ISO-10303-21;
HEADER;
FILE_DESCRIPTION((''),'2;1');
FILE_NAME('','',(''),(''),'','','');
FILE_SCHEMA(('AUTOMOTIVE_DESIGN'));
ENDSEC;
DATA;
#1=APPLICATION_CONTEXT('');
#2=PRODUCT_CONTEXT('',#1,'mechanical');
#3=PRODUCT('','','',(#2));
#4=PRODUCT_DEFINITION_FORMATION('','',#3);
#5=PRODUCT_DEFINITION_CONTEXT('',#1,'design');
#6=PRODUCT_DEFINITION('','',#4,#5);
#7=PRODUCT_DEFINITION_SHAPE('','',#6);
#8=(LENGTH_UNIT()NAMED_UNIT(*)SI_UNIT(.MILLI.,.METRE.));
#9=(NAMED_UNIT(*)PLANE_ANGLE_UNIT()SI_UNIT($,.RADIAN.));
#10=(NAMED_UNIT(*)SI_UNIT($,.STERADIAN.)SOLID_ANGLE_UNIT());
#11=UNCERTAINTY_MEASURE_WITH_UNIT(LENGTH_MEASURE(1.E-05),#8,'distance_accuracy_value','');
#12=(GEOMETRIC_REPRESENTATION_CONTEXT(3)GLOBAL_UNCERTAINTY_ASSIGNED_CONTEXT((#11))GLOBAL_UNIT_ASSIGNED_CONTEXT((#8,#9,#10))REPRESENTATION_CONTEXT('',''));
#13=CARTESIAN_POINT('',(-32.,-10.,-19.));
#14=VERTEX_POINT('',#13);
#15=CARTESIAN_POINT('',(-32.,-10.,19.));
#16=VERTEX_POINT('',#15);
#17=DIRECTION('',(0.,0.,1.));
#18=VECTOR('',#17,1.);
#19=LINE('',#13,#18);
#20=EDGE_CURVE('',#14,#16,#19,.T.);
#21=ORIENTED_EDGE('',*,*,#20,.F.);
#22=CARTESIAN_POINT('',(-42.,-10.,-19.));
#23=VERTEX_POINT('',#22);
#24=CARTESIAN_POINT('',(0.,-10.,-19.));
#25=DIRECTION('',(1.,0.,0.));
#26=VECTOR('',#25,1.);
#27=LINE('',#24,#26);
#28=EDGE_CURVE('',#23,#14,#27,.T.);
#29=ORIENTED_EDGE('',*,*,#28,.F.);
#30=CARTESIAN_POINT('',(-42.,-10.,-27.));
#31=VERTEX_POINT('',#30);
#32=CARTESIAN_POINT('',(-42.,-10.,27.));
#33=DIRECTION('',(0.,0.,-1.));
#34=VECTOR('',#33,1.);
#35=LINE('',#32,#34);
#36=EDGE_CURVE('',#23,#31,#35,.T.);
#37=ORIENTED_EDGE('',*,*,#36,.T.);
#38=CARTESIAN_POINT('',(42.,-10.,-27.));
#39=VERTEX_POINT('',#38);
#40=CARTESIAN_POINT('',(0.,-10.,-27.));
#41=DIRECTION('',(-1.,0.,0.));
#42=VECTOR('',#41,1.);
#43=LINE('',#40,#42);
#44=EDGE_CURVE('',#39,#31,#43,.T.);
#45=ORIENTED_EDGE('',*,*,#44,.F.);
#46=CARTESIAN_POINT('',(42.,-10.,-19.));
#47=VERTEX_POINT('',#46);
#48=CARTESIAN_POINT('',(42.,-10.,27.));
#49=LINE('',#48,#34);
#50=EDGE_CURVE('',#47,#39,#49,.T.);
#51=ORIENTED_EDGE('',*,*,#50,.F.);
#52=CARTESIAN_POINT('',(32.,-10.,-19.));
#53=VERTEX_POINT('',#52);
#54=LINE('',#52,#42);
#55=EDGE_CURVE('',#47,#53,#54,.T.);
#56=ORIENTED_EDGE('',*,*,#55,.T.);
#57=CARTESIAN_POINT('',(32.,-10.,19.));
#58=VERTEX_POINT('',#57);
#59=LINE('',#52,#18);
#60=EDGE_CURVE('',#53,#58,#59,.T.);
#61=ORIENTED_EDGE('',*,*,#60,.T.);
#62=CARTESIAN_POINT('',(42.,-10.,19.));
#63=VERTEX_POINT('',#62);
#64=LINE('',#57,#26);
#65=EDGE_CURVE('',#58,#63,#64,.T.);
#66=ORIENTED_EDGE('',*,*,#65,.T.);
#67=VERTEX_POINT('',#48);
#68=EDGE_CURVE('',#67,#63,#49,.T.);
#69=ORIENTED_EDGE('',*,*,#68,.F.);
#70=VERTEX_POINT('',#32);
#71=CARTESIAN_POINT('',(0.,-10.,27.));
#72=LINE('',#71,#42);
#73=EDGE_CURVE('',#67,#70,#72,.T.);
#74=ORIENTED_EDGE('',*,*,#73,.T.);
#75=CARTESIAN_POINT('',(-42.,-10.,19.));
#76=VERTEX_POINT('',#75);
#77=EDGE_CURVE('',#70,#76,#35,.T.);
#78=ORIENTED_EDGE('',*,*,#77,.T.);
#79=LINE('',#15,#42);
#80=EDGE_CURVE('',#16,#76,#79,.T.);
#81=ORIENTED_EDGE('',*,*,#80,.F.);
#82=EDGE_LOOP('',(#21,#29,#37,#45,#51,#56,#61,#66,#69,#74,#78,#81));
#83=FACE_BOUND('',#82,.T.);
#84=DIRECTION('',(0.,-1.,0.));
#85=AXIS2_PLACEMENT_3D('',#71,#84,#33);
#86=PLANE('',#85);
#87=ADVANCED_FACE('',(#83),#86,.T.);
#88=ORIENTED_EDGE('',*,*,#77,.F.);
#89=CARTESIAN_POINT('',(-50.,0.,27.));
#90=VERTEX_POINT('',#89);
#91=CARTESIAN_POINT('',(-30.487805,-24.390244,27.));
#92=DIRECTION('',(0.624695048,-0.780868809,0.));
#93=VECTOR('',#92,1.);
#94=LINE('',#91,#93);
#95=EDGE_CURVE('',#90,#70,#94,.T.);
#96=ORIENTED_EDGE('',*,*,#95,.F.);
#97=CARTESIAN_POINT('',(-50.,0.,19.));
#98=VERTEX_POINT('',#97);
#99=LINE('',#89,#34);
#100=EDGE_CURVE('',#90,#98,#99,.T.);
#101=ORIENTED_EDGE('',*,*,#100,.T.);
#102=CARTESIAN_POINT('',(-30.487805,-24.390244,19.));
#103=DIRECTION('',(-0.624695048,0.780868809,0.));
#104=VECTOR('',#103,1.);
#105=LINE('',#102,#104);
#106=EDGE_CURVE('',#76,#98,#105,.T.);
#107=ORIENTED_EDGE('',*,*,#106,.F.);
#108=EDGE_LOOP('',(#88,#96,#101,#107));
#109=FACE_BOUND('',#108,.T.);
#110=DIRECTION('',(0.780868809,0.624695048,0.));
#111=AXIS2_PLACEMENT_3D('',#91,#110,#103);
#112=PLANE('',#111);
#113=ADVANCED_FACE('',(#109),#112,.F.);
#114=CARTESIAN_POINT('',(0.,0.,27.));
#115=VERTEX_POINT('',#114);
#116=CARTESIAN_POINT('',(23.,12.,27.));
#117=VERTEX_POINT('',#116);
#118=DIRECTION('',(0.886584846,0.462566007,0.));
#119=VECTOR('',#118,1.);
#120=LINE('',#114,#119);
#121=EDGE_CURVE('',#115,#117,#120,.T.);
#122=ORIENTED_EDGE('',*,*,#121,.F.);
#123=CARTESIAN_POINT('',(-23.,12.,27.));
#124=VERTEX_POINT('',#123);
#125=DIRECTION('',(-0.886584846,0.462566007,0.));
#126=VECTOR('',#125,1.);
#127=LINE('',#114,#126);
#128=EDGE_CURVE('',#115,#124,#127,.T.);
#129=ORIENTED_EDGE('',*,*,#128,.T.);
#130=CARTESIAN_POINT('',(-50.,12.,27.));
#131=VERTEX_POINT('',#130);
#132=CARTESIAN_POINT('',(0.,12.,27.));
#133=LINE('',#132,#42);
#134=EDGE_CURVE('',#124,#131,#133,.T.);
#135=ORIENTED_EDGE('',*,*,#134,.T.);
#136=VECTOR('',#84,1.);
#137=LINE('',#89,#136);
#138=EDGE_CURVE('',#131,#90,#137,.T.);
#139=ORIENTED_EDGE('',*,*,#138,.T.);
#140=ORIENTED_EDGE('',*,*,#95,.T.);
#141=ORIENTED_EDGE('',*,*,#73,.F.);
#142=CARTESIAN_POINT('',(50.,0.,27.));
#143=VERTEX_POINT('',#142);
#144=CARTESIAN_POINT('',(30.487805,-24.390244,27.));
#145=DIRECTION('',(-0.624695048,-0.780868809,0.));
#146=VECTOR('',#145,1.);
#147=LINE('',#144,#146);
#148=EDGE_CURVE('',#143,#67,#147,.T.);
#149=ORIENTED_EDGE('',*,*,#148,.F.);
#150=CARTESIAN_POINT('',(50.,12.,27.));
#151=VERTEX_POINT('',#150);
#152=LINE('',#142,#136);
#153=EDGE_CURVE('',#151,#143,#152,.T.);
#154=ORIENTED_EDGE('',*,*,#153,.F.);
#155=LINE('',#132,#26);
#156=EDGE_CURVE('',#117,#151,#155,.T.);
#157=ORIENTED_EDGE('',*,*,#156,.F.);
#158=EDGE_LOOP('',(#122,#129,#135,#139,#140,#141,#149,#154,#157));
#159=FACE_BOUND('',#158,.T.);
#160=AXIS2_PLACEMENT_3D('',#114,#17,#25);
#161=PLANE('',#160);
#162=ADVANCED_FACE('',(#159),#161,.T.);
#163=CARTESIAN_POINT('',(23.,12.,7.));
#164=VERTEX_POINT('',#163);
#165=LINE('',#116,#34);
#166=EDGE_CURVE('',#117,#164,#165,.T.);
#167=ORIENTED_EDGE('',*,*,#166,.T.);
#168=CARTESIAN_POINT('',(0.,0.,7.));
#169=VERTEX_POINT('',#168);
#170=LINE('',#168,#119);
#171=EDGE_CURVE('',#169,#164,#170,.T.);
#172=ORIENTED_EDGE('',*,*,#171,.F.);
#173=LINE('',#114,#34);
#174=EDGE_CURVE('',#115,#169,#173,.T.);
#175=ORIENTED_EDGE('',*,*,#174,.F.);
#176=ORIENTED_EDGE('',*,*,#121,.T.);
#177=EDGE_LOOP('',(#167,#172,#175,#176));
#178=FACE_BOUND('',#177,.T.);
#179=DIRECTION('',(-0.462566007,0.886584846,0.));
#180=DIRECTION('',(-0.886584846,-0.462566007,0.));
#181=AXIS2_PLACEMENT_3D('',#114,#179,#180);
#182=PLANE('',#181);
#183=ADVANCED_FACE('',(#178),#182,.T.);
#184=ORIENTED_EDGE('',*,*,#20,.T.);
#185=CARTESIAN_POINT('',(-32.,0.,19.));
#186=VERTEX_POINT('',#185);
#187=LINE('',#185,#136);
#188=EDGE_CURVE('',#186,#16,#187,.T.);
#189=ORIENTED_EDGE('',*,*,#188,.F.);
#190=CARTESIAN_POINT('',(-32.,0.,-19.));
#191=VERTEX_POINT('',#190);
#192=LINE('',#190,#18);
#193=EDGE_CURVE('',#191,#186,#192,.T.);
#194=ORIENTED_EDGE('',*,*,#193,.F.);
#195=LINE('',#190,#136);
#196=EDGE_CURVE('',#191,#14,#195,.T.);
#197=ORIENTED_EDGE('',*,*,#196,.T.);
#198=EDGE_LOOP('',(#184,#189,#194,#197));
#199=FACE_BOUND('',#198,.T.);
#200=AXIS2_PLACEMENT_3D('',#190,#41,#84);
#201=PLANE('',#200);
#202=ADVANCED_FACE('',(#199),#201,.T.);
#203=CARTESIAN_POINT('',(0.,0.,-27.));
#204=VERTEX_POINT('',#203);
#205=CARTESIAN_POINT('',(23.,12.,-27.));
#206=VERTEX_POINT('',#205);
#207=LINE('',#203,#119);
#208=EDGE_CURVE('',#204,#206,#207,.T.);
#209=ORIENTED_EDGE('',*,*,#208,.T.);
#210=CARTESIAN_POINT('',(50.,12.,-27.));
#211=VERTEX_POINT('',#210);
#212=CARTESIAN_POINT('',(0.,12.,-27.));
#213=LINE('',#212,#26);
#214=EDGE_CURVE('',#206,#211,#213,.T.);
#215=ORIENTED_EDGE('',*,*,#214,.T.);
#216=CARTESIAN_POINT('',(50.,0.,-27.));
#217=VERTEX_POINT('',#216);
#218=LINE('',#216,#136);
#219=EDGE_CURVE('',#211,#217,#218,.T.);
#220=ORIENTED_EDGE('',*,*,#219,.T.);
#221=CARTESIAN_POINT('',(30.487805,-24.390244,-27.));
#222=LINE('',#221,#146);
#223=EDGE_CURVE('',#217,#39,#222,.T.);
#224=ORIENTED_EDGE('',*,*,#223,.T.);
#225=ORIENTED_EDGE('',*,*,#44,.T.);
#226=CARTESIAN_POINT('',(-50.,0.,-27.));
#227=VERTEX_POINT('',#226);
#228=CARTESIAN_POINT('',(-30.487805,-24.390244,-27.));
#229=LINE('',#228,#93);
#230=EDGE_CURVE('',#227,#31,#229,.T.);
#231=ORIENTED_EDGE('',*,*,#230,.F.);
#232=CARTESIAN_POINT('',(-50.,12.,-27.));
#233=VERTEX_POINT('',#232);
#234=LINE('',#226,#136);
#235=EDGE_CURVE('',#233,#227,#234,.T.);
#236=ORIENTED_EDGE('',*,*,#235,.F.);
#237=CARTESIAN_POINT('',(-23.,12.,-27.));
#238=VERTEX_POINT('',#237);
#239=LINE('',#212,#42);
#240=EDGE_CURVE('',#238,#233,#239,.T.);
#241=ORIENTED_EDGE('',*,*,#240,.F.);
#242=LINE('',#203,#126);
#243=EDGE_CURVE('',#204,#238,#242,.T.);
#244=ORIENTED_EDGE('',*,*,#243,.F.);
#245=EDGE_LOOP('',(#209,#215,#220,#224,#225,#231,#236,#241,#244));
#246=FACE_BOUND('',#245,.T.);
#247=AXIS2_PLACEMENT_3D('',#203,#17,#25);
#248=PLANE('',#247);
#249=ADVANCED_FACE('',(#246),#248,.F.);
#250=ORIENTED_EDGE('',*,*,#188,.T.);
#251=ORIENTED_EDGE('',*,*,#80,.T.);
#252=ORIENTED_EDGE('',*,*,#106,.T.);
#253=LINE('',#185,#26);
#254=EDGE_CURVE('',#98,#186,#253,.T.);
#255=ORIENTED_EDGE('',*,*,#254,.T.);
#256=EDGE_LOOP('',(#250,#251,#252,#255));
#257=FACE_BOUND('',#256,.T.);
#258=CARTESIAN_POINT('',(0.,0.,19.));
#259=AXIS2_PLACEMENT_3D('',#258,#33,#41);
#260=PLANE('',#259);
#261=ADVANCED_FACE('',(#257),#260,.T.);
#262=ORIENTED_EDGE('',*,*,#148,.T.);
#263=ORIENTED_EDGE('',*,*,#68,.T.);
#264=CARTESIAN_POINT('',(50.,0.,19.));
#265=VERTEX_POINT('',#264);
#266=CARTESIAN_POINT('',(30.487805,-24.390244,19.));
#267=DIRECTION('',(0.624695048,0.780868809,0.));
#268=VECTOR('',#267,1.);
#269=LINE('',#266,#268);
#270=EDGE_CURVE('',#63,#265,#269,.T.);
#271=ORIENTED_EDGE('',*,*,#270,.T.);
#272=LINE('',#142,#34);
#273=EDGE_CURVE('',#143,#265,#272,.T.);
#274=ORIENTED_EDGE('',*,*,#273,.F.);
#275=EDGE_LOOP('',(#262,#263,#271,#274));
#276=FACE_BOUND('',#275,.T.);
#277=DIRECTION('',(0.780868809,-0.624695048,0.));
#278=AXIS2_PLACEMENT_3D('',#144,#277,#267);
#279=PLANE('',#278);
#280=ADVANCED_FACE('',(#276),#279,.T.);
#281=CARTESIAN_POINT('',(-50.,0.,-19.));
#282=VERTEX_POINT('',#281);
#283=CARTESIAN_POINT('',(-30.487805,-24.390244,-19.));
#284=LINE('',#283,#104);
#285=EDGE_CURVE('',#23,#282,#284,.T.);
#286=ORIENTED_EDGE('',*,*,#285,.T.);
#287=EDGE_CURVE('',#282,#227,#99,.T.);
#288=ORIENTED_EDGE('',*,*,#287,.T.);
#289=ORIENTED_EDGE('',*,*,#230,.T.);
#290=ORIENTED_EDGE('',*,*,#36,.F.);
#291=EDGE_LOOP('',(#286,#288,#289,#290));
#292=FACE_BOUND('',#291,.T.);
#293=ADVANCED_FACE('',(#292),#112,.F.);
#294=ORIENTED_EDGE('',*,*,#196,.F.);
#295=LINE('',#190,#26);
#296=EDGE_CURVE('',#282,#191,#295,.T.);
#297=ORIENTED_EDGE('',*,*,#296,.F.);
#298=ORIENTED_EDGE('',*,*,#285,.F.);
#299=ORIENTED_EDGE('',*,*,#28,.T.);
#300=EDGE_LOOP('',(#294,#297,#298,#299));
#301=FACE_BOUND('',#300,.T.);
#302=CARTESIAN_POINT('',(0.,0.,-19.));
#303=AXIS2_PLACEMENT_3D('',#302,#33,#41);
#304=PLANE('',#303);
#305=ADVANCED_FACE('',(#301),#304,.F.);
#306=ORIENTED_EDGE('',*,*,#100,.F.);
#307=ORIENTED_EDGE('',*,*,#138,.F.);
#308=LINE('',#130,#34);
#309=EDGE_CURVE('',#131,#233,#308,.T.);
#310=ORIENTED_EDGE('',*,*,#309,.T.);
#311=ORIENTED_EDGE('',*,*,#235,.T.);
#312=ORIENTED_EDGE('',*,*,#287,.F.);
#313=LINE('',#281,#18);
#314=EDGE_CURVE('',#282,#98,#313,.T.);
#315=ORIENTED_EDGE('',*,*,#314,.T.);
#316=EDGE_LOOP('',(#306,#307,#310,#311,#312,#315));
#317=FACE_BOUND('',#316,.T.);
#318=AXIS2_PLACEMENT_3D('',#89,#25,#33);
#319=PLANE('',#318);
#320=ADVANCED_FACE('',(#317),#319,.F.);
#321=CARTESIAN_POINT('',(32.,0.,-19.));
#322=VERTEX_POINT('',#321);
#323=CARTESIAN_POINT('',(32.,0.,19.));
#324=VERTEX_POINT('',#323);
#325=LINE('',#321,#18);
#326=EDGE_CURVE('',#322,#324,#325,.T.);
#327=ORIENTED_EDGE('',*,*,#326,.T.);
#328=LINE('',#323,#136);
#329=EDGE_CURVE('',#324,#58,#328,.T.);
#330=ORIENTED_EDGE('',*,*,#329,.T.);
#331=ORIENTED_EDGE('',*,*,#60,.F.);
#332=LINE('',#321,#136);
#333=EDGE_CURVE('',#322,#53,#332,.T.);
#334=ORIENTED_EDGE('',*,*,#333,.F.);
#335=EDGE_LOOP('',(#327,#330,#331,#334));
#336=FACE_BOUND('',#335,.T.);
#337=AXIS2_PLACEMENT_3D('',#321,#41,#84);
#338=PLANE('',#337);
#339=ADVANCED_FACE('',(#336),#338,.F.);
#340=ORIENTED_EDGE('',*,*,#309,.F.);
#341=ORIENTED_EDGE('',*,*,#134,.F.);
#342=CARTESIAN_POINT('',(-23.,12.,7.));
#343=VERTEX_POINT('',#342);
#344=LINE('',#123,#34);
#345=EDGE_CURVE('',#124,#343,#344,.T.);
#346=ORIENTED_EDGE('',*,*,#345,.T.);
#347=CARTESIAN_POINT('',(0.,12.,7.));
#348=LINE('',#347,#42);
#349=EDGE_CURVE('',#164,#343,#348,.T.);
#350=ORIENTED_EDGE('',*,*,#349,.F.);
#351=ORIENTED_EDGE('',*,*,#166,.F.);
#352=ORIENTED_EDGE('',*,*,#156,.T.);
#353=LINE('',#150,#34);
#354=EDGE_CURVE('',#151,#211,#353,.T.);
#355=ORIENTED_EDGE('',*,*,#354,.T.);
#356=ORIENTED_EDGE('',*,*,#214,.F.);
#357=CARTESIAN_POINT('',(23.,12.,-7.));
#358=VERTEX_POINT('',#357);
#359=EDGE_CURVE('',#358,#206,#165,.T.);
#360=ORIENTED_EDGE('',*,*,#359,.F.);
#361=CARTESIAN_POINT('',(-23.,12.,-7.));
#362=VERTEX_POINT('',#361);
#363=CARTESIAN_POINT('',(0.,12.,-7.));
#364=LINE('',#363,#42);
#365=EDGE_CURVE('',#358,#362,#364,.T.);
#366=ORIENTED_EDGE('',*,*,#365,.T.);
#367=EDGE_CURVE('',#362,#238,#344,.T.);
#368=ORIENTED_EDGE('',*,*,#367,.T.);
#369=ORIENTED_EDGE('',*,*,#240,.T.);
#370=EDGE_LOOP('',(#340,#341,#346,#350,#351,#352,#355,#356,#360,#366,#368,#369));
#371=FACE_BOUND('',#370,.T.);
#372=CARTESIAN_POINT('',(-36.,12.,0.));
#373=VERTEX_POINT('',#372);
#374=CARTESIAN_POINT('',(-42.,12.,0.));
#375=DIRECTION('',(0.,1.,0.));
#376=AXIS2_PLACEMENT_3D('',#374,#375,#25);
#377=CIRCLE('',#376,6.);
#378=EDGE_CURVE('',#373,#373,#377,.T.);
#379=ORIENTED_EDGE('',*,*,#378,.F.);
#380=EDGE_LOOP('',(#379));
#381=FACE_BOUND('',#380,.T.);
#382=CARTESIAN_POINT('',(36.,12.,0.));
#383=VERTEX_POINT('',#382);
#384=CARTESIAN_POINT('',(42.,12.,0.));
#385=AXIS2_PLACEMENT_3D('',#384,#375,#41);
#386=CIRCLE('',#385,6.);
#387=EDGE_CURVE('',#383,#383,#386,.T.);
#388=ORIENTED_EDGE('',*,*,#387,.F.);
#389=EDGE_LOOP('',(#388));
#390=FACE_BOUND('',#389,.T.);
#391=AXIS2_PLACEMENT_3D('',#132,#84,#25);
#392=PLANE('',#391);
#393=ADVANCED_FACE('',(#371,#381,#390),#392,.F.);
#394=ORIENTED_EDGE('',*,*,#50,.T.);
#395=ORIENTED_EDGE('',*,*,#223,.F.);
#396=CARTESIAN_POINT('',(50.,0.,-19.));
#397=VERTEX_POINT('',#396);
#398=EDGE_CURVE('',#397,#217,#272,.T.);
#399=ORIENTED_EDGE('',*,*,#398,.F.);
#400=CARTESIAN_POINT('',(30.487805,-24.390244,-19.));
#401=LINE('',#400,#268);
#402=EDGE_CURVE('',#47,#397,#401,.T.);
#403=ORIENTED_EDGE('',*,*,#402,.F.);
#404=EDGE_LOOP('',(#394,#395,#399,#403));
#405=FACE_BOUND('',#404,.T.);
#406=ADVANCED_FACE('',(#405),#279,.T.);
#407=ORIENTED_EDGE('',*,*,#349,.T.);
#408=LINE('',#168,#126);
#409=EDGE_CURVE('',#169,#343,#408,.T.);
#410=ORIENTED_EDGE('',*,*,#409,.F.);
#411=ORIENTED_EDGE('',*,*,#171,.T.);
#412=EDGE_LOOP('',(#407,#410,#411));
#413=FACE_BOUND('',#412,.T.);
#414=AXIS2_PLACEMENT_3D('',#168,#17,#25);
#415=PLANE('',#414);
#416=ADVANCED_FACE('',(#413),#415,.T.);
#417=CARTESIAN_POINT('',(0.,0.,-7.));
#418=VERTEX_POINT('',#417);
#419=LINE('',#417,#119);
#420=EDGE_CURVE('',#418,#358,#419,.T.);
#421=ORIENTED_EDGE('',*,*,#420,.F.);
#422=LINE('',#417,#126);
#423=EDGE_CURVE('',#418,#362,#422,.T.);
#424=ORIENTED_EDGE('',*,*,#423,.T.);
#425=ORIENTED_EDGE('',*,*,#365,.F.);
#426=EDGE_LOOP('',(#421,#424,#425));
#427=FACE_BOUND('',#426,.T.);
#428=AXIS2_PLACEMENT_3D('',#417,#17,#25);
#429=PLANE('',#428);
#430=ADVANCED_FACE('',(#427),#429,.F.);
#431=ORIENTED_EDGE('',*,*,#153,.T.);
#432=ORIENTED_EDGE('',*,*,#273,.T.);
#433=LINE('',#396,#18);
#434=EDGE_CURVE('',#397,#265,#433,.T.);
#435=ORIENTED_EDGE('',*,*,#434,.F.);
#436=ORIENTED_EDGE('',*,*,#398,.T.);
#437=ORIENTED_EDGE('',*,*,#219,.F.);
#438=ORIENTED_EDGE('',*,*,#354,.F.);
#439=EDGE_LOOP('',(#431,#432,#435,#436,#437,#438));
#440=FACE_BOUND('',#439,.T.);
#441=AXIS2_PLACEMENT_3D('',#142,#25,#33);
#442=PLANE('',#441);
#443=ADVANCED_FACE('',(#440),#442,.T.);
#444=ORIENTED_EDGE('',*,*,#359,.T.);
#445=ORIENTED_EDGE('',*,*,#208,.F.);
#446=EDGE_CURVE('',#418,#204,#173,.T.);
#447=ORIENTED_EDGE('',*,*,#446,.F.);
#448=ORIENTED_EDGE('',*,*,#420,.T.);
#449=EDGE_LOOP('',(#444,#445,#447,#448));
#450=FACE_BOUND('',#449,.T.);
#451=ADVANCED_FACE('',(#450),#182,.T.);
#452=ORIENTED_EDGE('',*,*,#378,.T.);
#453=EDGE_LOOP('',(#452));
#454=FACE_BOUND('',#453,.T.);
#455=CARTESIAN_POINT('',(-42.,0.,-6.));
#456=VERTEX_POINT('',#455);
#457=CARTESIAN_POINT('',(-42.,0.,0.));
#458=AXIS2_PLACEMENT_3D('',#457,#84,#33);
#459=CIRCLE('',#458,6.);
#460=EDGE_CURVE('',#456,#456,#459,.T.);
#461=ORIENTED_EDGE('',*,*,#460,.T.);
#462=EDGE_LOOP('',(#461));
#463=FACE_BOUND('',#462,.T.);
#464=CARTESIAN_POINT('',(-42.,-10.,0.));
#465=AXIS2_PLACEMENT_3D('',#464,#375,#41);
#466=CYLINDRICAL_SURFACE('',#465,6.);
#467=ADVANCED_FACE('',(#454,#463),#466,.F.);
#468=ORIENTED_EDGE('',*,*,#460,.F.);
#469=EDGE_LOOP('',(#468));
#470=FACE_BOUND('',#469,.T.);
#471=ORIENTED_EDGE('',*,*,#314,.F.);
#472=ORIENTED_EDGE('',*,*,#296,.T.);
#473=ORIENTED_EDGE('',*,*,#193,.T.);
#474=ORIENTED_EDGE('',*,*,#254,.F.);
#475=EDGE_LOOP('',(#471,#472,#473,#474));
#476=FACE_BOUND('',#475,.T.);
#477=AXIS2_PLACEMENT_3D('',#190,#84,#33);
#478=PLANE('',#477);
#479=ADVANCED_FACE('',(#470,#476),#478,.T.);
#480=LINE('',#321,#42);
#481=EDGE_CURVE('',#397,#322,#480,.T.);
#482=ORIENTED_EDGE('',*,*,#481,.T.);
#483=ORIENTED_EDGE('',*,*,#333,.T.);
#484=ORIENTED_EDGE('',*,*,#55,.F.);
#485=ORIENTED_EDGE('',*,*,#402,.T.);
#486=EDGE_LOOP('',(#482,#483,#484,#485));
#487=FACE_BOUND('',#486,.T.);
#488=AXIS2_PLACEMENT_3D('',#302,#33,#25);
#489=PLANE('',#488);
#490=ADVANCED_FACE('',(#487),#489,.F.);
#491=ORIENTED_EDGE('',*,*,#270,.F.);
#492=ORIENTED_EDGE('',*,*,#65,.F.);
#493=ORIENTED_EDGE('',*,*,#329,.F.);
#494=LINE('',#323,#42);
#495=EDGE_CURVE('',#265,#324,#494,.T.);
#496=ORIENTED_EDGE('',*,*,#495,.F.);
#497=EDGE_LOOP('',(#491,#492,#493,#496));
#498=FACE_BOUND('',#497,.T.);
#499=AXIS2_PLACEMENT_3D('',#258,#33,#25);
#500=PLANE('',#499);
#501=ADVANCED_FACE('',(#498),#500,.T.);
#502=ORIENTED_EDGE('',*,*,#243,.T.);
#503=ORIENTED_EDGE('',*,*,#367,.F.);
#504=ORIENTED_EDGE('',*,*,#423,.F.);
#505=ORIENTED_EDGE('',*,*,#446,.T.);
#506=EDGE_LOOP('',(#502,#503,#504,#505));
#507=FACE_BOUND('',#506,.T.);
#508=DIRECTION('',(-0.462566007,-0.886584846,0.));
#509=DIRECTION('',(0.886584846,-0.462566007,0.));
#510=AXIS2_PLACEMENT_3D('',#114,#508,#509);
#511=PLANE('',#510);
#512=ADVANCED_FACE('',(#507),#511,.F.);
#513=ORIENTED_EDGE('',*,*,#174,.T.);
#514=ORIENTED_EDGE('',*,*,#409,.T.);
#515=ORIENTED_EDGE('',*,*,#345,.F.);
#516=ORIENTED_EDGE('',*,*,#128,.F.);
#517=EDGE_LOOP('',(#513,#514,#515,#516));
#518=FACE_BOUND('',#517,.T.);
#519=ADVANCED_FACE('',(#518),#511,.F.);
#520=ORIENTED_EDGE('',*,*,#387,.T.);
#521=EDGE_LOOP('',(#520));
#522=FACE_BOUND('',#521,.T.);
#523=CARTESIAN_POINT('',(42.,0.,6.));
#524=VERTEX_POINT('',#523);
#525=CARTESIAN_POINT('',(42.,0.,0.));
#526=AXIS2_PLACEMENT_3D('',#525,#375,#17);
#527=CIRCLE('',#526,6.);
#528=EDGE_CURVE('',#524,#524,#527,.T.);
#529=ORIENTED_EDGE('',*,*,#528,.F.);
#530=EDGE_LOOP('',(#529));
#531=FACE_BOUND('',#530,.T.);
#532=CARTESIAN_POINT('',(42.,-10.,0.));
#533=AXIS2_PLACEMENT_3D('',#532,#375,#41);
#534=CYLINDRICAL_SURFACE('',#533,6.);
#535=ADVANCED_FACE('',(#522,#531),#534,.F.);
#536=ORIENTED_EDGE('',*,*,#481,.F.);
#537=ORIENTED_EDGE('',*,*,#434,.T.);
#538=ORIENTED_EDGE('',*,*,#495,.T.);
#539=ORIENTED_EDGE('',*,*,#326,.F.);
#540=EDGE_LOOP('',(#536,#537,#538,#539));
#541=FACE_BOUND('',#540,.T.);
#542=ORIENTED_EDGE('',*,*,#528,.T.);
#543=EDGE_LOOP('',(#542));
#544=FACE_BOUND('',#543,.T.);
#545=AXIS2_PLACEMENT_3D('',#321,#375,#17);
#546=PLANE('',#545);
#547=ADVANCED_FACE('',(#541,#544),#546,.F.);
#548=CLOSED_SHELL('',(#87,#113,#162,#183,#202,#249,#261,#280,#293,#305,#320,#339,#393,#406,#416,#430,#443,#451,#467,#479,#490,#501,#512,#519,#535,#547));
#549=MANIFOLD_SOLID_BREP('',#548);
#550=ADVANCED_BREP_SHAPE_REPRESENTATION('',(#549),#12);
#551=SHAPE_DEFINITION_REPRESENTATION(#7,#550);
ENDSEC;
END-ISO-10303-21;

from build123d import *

# Parameters (mm, degrees)
EXTRUDE_1_DEPTH       = 27
EXTRUDE_2_DEPTH       = 7
CUT_EXTRUDE_START     = -19
CUT_EXTRUDE_3_DEPTH   = 38
SKETCH_2_R            = 6
CUT_EXTRUDE_3_2_DEPTH = 61.934390946


# Read off the part's stored shape, not the designer's step: 切除-拉伸-薄壁3
with BuildPart() as part:
    # 草图1 → 凸台-拉伸1 (new, symmetric)
    with BuildSketch(Plane.XY):
        Polygon((23, 12), (0, 0), (-23, 12), (-50, 12), (-50, 0), (-32, 0), (-32, -10), (32, -10), (32, 0), (50, 0), (50, 12), align=None)
        Polygon((-32, 0), (-50, 0), (-42, -10), (-32, -10), align=None)
        Polygon((42, -10), (50, 0), (32, 0), (32, -10), align=None)
    extrude(amount=EXTRUDE_1_DEPTH, both=True)

    # 草图1<4> → 凸台-拉伸2 (add, symmetric)
    with BuildSketch(Plane.XY):
        Polygon((0, 12), (0, 0), (23, 12), align=None)
        Polygon((-23, 12), (0, 0), (0, 12), align=None)
    extrude(amount=EXTRUDE_2_DEPTH, both=True)

    # Cut-Extrude 3 outline → Cut-Extrude 3 (cut)
    with BuildSketch(Plane.XY.offset(CUT_EXTRUDE_START)):
        Polygon((-32, 0), (-50, 0), (-42, -10), (-32, -10), align=None)
    cut_extrude_3 = extrude(amount=CUT_EXTRUDE_3_DEPTH, mode=Mode.SUBTRACT)

    # 镜向1: Cut-Extrude 3 across plane
    add(cut_extrude_3.mirror(Plane(origin=(0, 0, 0), x_dir=(0, 0, 1), z_dir=(1, 0, 0))), mode=Mode.SUBTRACT)

    # 草图2 → Cut-Extrude 3 2 (cut, through all)
    with BuildSketch(Plane(origin=(0, 12, 0), x_dir=(1, 0, 0), z_dir=(0, 1, 0))):
        with Locations(Location((42, 0, 0), (0, 0, 180))):
            Circle(SKETCH_2_R)
        with Locations(Location((-42, 0, 0), (0, 0, 90))):
            Circle(SKETCH_2_R)
    extrude(amount=-CUT_EXTRUDE_3_2_DEPTH, mode=Mode.SUBTRACT)


solid = part.part
